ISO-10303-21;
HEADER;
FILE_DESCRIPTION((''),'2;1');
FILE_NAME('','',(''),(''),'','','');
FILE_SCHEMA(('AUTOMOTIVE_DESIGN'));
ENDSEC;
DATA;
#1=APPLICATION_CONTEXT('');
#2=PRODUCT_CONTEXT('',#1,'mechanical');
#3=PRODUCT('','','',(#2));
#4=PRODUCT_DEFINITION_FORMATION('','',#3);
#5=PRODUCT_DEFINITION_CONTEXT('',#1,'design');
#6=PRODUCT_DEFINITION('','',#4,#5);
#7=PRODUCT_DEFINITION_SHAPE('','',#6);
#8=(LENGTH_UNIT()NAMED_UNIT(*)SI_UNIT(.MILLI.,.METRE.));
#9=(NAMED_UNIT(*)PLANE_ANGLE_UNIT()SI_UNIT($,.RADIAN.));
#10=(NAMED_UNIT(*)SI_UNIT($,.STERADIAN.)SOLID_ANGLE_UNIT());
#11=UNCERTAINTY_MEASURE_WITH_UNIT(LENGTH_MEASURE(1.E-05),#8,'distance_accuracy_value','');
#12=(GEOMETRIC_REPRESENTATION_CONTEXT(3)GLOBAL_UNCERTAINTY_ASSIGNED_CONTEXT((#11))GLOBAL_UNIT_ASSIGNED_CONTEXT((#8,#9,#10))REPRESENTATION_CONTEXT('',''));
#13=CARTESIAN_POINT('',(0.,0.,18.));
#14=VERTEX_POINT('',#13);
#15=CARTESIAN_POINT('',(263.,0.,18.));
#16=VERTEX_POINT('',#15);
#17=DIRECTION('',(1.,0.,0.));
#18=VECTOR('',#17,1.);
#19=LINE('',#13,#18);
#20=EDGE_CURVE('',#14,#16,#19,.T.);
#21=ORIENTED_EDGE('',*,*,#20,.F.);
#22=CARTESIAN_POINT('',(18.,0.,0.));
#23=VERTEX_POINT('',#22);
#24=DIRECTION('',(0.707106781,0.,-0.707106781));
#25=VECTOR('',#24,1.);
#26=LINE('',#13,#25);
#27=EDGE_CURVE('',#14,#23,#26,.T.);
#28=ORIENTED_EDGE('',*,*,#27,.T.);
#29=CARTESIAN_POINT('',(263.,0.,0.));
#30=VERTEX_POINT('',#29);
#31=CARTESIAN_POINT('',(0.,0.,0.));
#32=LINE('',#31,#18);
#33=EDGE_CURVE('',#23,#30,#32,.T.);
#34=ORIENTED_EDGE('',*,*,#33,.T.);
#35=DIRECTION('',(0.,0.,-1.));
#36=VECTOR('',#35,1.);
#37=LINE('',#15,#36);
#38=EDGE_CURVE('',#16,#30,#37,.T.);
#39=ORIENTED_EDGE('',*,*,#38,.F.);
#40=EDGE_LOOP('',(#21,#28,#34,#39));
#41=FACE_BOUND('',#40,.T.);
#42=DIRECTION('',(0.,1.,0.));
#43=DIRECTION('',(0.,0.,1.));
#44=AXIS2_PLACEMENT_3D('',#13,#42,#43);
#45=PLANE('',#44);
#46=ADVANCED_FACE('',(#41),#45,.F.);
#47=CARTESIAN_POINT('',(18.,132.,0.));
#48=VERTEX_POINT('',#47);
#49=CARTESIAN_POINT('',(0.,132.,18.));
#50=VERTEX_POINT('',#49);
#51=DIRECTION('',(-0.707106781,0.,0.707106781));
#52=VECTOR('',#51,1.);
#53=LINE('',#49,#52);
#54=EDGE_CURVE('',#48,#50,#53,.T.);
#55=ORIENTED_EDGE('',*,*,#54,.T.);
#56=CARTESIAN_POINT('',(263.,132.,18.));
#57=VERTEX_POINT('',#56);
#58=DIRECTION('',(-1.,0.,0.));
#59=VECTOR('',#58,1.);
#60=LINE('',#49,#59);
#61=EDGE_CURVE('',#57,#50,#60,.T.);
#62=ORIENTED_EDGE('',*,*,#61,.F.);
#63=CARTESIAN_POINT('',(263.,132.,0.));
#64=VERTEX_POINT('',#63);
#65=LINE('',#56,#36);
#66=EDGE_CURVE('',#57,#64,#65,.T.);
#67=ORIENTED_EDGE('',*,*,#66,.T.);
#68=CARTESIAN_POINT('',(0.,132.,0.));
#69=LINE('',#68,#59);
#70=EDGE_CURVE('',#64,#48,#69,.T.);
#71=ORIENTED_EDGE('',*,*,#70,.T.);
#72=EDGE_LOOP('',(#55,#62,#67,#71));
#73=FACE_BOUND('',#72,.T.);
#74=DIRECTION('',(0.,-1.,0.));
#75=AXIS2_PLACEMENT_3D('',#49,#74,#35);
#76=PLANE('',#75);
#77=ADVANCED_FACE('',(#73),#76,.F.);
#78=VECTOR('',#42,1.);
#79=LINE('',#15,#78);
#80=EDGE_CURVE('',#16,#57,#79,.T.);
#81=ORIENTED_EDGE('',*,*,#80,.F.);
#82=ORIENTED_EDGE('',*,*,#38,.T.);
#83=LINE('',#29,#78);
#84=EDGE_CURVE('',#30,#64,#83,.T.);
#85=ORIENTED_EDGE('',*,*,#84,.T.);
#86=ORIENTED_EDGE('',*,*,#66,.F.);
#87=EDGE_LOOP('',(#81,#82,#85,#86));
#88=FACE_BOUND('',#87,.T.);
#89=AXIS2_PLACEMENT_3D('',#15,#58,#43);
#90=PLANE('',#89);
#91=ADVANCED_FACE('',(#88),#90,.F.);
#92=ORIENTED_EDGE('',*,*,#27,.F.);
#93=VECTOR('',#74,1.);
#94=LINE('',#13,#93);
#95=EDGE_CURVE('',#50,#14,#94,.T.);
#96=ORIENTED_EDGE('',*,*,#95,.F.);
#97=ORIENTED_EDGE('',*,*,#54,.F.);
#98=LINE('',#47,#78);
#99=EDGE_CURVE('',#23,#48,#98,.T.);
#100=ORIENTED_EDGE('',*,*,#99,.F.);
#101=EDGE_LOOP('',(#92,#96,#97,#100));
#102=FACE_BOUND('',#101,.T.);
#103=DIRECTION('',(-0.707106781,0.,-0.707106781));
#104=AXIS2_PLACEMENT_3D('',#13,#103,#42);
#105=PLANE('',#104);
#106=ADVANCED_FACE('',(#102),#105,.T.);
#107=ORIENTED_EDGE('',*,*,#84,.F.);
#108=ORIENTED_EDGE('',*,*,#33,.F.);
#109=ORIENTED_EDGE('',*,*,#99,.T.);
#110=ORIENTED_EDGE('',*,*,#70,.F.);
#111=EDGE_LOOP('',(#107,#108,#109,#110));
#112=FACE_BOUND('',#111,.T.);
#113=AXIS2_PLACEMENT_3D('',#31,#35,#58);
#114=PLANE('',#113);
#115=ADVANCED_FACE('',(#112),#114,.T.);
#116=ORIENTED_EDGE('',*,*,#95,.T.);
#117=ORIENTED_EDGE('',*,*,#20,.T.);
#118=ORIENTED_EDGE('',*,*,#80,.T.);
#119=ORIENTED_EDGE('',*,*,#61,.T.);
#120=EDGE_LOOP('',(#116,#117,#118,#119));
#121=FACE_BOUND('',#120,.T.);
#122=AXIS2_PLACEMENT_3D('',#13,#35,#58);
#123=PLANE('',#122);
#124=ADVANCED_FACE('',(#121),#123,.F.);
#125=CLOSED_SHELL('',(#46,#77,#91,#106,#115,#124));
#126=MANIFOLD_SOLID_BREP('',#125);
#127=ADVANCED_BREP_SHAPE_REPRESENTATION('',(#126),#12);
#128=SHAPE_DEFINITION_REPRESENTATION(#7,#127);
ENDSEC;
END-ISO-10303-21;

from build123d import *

# Parameters (mm, degrees)
SKETCH1_W           = 263
SKETCH1_H           = 132
BOSS_EXTRUDE1_DEPTH = 18
CHAMFER1_START      = -1
CHAMFER1_OUTLINE_W  = 28
CHAMFER1_OUTLINE_H  = 134
CHAMFER1_DEPTH      = 13.727922061


with BuildPart() as part:
    # Sketch1 → Boss-Extrude1 (new body)
    with BuildSketch(Plane.XY):
        with Locations((131.5, 66)):
            Rectangle(SKETCH1_W, SKETCH1_H)
    extrude(amount=BOSS_EXTRUDE1_DEPTH)

    # Chamfer1: read off the stored shape, not the designer's step
    # Chamfer1 outline → Chamfer1 (cut)
    with BuildSketch(Plane(origin=(0, 0, 0), x_dir=(0.7071067811865474, 0, -0.7071067811865477), z_dir=(0.7071067811865476, 0, 0.7071067811865476)).offset(CHAMFER1_START)):
        with Locations((0, 66)):
            Rectangle(CHAMFER1_OUTLINE_W, CHAMFER1_OUTLINE_H)
    extrude(amount=CHAMFER1_DEPTH, mode=Mode.SUBTRACT)


solid = part.part
